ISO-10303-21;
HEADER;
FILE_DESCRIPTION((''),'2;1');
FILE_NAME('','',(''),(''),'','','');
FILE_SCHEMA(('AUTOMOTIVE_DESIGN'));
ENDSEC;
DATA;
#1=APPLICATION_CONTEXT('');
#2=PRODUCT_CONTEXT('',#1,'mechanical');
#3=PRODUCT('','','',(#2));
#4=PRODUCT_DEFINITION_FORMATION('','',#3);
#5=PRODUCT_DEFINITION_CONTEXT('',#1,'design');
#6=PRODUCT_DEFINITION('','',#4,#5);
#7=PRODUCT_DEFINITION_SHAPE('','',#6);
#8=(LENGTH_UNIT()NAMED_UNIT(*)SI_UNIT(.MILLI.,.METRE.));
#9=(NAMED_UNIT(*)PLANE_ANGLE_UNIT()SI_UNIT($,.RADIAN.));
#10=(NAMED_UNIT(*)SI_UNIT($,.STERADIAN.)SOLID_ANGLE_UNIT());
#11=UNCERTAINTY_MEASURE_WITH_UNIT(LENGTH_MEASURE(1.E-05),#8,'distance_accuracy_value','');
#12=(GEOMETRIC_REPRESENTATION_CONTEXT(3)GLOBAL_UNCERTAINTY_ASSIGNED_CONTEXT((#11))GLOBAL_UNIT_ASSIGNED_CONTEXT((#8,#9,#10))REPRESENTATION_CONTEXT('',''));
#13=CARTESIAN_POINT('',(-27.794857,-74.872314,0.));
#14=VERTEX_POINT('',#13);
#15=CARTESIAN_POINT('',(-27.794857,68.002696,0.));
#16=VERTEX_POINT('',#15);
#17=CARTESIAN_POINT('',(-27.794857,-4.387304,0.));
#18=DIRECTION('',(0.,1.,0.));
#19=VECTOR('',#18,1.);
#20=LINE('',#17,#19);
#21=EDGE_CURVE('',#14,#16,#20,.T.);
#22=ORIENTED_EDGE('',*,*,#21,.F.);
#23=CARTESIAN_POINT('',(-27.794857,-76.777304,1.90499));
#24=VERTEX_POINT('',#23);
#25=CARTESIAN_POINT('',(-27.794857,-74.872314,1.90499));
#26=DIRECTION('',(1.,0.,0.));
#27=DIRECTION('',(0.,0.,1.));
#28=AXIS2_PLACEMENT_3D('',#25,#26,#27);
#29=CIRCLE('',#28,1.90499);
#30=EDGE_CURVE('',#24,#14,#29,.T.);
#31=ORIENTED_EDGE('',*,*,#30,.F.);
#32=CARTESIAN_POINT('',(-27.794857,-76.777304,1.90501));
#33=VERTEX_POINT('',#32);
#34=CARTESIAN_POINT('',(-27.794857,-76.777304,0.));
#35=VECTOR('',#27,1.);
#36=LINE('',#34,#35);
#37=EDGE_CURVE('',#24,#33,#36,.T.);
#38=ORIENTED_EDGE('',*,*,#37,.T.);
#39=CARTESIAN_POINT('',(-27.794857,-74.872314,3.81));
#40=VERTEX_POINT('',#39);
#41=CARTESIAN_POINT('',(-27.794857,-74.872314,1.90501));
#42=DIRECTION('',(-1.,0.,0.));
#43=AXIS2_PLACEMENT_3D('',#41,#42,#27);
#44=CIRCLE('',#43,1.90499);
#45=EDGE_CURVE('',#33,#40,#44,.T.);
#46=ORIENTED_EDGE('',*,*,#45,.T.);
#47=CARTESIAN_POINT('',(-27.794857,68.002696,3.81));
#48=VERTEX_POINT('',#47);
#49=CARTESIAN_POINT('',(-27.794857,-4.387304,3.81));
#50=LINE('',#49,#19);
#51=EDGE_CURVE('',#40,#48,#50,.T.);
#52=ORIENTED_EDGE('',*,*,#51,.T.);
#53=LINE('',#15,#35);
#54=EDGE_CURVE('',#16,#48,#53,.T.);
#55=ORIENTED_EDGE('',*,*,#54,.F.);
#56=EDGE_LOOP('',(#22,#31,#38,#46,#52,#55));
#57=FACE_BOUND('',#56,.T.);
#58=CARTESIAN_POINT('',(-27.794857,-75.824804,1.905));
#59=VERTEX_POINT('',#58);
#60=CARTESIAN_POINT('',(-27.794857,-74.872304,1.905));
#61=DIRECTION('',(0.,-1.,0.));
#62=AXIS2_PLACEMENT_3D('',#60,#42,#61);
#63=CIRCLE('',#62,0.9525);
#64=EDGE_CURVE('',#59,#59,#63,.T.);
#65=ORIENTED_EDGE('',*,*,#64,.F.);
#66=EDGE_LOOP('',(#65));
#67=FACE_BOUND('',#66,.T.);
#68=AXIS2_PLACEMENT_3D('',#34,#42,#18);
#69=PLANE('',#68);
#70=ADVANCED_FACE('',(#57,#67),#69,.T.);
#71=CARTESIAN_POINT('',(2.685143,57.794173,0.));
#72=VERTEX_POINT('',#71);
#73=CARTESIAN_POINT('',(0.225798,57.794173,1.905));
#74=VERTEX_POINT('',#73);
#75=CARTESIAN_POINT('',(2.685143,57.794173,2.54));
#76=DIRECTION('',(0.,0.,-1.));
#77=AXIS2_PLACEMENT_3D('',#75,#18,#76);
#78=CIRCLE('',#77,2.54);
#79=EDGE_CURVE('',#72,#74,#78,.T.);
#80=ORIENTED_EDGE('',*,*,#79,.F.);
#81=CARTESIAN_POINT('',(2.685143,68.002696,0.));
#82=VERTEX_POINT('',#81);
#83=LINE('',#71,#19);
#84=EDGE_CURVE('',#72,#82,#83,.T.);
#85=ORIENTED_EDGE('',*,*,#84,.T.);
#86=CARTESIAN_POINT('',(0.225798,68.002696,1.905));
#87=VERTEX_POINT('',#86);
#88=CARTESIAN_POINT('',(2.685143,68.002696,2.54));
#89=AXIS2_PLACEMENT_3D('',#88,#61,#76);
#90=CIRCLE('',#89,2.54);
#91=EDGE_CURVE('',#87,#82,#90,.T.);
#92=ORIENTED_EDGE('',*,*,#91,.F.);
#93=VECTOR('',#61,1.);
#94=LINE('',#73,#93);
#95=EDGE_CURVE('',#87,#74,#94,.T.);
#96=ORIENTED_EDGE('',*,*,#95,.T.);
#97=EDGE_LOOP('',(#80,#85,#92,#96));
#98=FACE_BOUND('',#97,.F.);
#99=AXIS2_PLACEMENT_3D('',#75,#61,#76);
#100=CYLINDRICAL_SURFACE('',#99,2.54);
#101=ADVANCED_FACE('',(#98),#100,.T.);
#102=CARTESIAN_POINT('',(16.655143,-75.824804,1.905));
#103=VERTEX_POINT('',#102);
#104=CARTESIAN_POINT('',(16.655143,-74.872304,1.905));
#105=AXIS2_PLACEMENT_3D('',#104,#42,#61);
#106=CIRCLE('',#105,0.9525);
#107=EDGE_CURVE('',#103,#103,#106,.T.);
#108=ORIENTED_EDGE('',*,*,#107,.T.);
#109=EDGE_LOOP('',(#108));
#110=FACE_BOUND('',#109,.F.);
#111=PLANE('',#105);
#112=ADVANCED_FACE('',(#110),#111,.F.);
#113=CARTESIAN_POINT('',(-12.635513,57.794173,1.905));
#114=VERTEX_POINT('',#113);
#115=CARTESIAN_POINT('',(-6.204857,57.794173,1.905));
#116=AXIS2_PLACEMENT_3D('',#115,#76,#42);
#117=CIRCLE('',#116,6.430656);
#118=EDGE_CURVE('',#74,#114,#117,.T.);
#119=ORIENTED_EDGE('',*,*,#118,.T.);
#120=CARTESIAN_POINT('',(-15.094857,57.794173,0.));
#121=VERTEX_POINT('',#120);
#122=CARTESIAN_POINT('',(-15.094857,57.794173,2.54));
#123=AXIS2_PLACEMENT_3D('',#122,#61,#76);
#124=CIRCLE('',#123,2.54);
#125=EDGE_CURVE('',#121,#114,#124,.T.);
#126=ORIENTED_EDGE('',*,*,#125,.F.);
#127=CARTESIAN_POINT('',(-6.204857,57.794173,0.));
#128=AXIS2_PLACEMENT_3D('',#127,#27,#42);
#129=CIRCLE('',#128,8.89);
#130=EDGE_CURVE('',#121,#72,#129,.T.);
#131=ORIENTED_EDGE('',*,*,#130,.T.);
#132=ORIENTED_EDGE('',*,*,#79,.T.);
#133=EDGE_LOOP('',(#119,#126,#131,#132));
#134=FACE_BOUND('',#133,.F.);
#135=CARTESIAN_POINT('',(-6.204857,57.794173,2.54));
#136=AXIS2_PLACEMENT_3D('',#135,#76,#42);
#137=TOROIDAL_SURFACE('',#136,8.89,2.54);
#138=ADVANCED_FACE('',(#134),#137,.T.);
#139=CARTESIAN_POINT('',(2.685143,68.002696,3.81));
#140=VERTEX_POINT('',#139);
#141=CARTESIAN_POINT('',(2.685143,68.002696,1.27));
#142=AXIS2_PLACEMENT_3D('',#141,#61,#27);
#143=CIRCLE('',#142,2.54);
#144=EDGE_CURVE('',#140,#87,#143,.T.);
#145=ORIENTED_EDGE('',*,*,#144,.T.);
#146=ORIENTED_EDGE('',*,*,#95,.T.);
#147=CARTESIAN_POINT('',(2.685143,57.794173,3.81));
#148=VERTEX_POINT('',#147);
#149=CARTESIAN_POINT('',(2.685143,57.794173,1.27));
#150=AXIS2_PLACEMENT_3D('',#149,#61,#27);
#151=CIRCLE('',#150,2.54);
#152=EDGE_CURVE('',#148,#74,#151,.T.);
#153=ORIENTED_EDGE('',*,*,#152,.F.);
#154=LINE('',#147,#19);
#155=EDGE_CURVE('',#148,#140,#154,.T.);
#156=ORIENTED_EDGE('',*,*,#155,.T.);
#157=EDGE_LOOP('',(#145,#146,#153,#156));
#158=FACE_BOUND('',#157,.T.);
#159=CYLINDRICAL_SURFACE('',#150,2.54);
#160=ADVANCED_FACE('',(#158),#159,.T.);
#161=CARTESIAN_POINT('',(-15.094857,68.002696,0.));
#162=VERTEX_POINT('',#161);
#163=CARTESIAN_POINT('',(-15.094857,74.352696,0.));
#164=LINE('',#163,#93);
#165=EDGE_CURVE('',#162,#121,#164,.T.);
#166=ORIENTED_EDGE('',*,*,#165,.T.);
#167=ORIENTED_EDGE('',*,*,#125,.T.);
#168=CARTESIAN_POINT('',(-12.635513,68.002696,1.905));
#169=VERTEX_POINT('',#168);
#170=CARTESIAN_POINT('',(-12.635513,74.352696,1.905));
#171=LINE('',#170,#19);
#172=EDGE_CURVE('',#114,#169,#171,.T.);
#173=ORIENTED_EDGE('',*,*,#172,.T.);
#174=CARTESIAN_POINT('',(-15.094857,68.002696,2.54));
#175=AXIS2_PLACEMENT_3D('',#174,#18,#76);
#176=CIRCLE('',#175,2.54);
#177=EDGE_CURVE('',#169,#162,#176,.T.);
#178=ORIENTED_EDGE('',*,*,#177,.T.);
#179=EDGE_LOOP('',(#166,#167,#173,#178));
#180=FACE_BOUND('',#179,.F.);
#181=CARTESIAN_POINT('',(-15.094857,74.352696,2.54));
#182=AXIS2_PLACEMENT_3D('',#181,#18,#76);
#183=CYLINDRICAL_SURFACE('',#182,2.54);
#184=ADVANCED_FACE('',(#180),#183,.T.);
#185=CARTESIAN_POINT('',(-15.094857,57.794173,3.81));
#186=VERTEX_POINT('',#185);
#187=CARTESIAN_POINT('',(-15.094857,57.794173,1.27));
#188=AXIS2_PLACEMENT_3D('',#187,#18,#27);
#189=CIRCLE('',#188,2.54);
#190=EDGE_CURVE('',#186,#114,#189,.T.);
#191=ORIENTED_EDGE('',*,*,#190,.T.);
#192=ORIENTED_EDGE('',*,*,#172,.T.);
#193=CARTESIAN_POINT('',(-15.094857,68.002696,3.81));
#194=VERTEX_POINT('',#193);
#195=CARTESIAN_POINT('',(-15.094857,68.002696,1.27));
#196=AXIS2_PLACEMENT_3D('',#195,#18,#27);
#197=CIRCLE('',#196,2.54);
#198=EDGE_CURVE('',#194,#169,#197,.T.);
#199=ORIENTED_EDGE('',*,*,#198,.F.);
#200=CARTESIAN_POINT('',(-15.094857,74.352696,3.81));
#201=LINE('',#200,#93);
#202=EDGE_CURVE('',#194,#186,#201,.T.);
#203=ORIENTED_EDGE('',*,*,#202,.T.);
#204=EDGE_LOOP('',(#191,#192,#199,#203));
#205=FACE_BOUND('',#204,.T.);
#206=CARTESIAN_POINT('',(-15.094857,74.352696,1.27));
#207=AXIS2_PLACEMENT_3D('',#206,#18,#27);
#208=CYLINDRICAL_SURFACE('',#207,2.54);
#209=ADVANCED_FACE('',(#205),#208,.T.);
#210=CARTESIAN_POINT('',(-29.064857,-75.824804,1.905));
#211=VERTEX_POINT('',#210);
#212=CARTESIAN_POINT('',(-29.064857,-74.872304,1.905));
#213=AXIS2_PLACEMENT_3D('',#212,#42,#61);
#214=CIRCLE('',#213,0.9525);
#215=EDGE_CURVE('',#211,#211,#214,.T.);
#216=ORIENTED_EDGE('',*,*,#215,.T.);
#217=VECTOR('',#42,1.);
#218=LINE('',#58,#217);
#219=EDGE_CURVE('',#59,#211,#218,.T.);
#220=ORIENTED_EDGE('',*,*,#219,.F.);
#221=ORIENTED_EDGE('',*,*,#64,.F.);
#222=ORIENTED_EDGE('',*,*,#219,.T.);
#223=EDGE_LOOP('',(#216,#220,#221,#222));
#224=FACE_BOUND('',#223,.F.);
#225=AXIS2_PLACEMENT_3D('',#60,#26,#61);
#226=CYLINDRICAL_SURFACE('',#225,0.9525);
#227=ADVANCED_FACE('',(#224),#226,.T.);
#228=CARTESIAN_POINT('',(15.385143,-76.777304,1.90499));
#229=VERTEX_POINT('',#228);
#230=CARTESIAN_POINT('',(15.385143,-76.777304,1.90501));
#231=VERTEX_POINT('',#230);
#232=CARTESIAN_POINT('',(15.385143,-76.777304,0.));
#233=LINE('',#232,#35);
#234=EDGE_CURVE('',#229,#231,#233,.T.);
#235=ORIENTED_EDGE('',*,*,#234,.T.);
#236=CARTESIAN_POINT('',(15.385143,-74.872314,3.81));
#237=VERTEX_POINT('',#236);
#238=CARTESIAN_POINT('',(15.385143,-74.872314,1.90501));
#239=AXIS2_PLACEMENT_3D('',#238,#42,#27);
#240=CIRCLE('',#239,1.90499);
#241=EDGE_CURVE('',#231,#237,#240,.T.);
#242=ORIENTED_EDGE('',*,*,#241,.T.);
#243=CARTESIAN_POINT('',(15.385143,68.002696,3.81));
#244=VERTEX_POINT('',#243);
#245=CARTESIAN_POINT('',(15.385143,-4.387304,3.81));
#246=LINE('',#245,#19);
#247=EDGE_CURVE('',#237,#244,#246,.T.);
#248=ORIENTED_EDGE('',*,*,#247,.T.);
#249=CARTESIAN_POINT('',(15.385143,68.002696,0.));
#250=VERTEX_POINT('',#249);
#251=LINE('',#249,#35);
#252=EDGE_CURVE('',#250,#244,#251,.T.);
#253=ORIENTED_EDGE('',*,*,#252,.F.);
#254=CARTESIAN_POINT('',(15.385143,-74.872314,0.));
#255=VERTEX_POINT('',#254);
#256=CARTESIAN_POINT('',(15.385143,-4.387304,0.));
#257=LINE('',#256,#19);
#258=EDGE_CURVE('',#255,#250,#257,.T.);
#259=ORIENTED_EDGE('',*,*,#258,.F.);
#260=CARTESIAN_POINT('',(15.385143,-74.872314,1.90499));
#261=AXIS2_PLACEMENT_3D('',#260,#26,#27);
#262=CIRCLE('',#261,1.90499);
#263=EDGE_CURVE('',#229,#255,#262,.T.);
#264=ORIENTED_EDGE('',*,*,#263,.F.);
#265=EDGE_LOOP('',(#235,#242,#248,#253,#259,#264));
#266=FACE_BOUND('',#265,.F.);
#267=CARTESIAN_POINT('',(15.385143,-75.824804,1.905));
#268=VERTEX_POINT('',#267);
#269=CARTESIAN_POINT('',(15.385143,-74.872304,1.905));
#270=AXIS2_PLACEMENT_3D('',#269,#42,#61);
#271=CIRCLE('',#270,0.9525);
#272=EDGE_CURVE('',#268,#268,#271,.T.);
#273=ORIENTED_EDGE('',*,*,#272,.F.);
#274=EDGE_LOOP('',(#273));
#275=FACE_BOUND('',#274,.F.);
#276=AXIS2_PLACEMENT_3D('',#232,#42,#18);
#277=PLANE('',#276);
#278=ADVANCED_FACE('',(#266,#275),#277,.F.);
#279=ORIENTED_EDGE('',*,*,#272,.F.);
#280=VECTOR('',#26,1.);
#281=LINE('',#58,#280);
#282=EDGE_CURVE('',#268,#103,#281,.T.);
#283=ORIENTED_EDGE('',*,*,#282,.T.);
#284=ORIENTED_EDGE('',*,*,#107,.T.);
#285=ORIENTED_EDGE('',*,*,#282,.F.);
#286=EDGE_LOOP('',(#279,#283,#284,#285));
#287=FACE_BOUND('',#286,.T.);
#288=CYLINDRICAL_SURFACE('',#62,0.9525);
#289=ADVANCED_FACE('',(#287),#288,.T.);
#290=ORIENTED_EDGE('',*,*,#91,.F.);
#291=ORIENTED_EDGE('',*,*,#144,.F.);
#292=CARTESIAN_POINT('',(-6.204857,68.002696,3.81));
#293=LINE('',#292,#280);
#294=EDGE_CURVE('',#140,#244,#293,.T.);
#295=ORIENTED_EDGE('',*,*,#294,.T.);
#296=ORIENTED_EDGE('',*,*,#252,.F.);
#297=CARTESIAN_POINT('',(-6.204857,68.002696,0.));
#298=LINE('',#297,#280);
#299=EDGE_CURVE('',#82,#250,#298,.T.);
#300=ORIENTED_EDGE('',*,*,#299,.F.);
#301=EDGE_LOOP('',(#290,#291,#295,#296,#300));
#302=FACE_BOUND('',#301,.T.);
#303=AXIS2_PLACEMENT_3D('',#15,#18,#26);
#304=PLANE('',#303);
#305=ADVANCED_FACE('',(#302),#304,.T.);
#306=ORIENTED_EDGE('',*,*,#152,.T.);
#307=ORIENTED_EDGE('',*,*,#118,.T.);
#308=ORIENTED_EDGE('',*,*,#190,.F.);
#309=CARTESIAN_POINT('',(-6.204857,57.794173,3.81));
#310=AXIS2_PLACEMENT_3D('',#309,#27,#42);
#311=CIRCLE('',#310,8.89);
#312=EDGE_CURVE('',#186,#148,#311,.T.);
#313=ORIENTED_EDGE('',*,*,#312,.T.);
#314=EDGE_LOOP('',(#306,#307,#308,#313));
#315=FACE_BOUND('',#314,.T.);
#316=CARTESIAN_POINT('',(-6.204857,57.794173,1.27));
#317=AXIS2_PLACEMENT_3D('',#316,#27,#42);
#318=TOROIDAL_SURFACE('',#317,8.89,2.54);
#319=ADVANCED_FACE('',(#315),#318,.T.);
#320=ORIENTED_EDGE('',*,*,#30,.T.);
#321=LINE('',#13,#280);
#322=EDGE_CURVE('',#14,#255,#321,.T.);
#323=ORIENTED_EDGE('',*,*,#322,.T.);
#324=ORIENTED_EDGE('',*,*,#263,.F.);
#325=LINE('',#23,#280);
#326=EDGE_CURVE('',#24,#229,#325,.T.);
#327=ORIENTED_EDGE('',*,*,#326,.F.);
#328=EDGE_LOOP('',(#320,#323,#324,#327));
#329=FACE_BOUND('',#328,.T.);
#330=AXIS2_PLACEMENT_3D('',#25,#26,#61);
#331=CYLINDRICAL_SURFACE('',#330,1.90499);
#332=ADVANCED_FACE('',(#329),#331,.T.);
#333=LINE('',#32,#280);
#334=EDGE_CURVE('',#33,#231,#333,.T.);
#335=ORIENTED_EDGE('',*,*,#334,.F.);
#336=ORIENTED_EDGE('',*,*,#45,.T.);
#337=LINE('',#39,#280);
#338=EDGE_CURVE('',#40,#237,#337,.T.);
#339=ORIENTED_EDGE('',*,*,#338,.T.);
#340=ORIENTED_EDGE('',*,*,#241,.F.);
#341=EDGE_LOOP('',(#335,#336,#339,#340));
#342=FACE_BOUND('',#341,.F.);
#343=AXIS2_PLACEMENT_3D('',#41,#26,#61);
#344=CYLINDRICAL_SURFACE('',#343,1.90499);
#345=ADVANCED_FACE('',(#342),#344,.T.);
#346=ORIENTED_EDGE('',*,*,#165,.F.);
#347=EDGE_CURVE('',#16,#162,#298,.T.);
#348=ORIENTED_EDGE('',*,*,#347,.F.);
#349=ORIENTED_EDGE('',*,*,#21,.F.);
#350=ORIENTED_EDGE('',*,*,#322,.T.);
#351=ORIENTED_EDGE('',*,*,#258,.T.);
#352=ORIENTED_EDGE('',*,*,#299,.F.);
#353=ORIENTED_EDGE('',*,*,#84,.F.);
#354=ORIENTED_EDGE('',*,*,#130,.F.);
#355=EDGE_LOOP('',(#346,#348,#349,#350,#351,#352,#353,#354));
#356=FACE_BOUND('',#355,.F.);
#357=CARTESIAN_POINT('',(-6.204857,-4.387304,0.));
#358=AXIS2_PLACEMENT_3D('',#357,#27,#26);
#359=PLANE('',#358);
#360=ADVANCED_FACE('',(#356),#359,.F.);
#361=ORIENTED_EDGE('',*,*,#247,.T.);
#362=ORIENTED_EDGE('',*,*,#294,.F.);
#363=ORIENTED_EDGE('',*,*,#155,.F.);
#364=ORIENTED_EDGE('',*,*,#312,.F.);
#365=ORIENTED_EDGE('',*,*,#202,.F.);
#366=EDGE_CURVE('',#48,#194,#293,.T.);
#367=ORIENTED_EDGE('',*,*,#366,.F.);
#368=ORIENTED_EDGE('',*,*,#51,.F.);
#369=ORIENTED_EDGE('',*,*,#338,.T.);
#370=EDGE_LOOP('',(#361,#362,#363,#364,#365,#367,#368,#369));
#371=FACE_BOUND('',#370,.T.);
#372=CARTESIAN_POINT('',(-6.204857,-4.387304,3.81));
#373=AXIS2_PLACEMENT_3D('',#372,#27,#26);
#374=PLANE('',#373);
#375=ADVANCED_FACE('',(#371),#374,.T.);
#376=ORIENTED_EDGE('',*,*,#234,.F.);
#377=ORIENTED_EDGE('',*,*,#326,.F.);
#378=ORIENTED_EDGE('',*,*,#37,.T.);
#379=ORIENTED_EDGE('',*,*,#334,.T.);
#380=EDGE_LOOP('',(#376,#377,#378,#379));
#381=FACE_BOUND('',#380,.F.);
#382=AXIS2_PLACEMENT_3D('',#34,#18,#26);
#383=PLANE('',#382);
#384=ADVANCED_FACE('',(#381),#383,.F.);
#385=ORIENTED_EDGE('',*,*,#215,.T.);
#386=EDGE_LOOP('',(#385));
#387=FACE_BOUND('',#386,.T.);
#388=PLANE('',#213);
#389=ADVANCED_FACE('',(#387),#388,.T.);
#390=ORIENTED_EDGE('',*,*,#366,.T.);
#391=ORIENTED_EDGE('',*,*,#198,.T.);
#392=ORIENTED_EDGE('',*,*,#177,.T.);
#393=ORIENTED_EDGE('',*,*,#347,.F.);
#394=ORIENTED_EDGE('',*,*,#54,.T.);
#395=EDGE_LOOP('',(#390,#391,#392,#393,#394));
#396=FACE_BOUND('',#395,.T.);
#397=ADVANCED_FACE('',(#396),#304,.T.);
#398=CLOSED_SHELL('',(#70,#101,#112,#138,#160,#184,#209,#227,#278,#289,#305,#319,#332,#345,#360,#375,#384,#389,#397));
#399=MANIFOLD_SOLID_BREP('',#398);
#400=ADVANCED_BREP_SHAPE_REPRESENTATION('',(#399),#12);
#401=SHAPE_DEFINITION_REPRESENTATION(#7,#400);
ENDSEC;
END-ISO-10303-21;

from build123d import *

# Parameters (mm, degrees)
F0_W          = 43.18
F0_H          = 144.78
F1_DEPTH      = 3.81
F3_DEPTH      = 25.4
F4_T3_DEPTH   = 16.5585234346
F4_T6_DEPTH   = 16.5585234346
F4_T9_ANGLE   = 180
F4_T12_DEPTH  = 16.5585234346
F4_T15_ANGLE  = 180
F4_T18_DEPTH  = 16.5585234346
F5_R          = 1.90499
F6_R          = 0.9525
F7_DEPTH      = 1.27
F7_DEPTH_BACK = 44.45


# Not quite as in the source:
# - a fillet or chamfer that OpenCascade refuses, or shapes differently, is made with other operations: its cross-section is extruded or revolved along the edge and cut away or added
# - a fillet or chamfer is up to 0.001 mm smaller than in the source, because OpenCascade refuses the exact size


with BuildPart() as f1:
    # F0 (on Top) → F1 (new body)
    with BuildSketch(Plane.XY):
        with Locations((-6.204857491, -4.3873040367)):
            Rectangle(F0_W, F0_H)
    extrude(amount=F1_DEPTH)

    # F2 (on face) → F3 (cut)
    with BuildSketch(Plane.XY.offset(3.81)):
        with BuildLine():
            ThreePointArc((0.145142509, 57.7941725286), (-6.204857491, 64.1441725286), (-12.554857491, 57.7941725286))
            Line((-12.554857491, 57.7941725286), (0.145142509, 57.7941725286))
        make_face()
        with BuildLine():
            Line((0.145142509, 68.0026959633), (-12.554857491, 68.0026959633))
            Line((-12.554857491, 68.0026959633), (-12.554857491, 57.7941725286))
            ThreePointArc((-12.554857491, 57.7941725286), (-6.204857491, 64.1441725286), (0.145142509, 57.7941725286))
            Line((0.145142509, 57.7941725286), (0.145142509, 68.0026959633))
        make_face()
        with BuildLine():
            Line((0.145142509, 57.7941725286), (-12.554857491, 57.7941725286))
            ThreePointArc((-12.554857491, 57.7941725286), (-6.204857491, 51.4441725286), (0.145142509, 57.7941725286))
        make_face()
    extrude(amount=-F3_DEPTH, mode=Mode.SUBTRACT)

    # F4: fillet of radius 2.54 on 2 edges, made by hand


with BuildPart() as f4_tool1:
    # F4_s2 → F4_t3 (new body)
    with BuildSketch(Plane.XZ.offset(-74.3526959633)):
        with BuildLine():
            ThreePointArc((-15.094857491, 3.81), (-13.2988062667, 3.0660512242), (-12.554857491, 1.27))
            Line((-12.554857491, 1.27), (-12.554857491, 3.81))
            Line((-12.554857491, 3.81), (-15.094857491, 3.81))
        make_face()
    extrude(amount=F4_T3_DEPTH)


with BuildPart() as f4_tool4:
    # F4_s5 → F4_t6 (new body)
    with BuildSketch(Plane.XZ.offset(-74.3526959633)):
        with BuildLine():
            ThreePointArc((-15.094857491, 0), (-13.2988062667, 0.7439487758), (-12.554857491, 2.54))
            Line((-12.554857491, 2.54), (-12.554857491, 0))
            Line((-12.554857491, 0), (-15.094857491, 0))
        make_face()
    extrude(amount=F4_T6_DEPTH)


with BuildPart() as f4_tool7:
    # F4_s8 → F4_t9 (revolve)
    with BuildSketch(Plane.XZ.offset(-57.7941725286)):
        with BuildLine():
            ThreePointArc((-15.094857491, 0), (-13.2988062667, 0.7439487758), (-12.554857491, 2.54))
            Line((-12.554857491, 2.54), (-12.554857491, 0))
            Line((-12.554857491, 0), (-15.094857491, 0))
        make_face()
    revolve(axis=Axis((-6.204857491, 57.7941725286, 0), (0, 0, 1)), revolution_arc=F4_T9_ANGLE)


with BuildPart() as f4_tool10:
    # F4_s11 → F4_t12 (new body)
    with BuildSketch(Plane.XZ.offset(-57.7941725286)):
        with BuildLine():
            ThreePointArc((2.685142509, 0), (0.8890912848, 0.7439487758), (0.145142509, 2.54))
            Line((0.145142509, 2.54), (0.145142509, 0))
            Line((0.145142509, 0), (2.685142509, 0))
        make_face()
    extrude(amount=-F4_T12_DEPTH)


with BuildPart() as f4_tool13:
    # F4_s14 → F4_t15 (revolve)
    with BuildSketch(Plane.XZ.offset(-57.7941725286)):
        with BuildLine():
            ThreePointArc((-15.094857491, 3.81), (-13.2988062667, 3.0660512242), (-12.554857491, 1.27))
            Line((-12.554857491, 1.27), (-12.554857491, 3.81))
            Line((-12.554857491, 3.81), (-15.094857491, 3.81))
        make_face()
    revolve(axis=Axis((-6.204857491, 57.7941725286, 3.81), (0, 0, 1)), revolution_arc=F4_T15_ANGLE)


with BuildPart() as f4_tool16:
    # F4_s17 → F4_t18 (new body)
    with BuildSketch(Plane.XZ.offset(-57.7941725286)):
        with BuildLine():
            ThreePointArc((2.685142509, 3.81), (0.8890912848, 3.0660512242), (0.145142509, 1.27))
            Line((0.145142509, 1.27), (0.145142509, 3.81))
            Line((0.145142509, 3.81), (2.685142509, 3.81))
        make_face()
    extrude(amount=-F4_T18_DEPTH)


with BuildPart() as f1_1:
    add(f1.part)

    # F4_t19: cut F4_tool1, F4_tool4, F4_tool7, F4_tool10, F4_tool13, F4_tool16
    add([f4_tool1.part, f4_tool4.part, f4_tool7.part, f4_tool10.part, f4_tool13.part, f4_tool16.part], mode=Mode.SUBTRACT)

    # F5 (radius 1.905 in the source; OpenCascade refuses exactly that, so slightly less here)
    f5_edges = [f1_1.edges().sort_by_distance(p)[0] for p in [
        (-6.204857, -76.777304, 3.81),
        (-6.204857, -76.777304, 0),
    ]]
    fillet(f5_edges, radius=F5_R)

    # F6 (on face) → F7 (join, two sides)
    with BuildSketch(Plane(origin=(-27.794857491, 0, 0), x_dir=(0, -1, 0), z_dir=(-1, 0, 0))) as f7_sk:
        with Locations((74.8723040367, 1.905)):
            Circle(F6_R)
    extrude(amount=F7_DEPTH)
    extrude(f7_sk.sketch, amount=-F7_DEPTH_BACK)


solid = f1_1.part
